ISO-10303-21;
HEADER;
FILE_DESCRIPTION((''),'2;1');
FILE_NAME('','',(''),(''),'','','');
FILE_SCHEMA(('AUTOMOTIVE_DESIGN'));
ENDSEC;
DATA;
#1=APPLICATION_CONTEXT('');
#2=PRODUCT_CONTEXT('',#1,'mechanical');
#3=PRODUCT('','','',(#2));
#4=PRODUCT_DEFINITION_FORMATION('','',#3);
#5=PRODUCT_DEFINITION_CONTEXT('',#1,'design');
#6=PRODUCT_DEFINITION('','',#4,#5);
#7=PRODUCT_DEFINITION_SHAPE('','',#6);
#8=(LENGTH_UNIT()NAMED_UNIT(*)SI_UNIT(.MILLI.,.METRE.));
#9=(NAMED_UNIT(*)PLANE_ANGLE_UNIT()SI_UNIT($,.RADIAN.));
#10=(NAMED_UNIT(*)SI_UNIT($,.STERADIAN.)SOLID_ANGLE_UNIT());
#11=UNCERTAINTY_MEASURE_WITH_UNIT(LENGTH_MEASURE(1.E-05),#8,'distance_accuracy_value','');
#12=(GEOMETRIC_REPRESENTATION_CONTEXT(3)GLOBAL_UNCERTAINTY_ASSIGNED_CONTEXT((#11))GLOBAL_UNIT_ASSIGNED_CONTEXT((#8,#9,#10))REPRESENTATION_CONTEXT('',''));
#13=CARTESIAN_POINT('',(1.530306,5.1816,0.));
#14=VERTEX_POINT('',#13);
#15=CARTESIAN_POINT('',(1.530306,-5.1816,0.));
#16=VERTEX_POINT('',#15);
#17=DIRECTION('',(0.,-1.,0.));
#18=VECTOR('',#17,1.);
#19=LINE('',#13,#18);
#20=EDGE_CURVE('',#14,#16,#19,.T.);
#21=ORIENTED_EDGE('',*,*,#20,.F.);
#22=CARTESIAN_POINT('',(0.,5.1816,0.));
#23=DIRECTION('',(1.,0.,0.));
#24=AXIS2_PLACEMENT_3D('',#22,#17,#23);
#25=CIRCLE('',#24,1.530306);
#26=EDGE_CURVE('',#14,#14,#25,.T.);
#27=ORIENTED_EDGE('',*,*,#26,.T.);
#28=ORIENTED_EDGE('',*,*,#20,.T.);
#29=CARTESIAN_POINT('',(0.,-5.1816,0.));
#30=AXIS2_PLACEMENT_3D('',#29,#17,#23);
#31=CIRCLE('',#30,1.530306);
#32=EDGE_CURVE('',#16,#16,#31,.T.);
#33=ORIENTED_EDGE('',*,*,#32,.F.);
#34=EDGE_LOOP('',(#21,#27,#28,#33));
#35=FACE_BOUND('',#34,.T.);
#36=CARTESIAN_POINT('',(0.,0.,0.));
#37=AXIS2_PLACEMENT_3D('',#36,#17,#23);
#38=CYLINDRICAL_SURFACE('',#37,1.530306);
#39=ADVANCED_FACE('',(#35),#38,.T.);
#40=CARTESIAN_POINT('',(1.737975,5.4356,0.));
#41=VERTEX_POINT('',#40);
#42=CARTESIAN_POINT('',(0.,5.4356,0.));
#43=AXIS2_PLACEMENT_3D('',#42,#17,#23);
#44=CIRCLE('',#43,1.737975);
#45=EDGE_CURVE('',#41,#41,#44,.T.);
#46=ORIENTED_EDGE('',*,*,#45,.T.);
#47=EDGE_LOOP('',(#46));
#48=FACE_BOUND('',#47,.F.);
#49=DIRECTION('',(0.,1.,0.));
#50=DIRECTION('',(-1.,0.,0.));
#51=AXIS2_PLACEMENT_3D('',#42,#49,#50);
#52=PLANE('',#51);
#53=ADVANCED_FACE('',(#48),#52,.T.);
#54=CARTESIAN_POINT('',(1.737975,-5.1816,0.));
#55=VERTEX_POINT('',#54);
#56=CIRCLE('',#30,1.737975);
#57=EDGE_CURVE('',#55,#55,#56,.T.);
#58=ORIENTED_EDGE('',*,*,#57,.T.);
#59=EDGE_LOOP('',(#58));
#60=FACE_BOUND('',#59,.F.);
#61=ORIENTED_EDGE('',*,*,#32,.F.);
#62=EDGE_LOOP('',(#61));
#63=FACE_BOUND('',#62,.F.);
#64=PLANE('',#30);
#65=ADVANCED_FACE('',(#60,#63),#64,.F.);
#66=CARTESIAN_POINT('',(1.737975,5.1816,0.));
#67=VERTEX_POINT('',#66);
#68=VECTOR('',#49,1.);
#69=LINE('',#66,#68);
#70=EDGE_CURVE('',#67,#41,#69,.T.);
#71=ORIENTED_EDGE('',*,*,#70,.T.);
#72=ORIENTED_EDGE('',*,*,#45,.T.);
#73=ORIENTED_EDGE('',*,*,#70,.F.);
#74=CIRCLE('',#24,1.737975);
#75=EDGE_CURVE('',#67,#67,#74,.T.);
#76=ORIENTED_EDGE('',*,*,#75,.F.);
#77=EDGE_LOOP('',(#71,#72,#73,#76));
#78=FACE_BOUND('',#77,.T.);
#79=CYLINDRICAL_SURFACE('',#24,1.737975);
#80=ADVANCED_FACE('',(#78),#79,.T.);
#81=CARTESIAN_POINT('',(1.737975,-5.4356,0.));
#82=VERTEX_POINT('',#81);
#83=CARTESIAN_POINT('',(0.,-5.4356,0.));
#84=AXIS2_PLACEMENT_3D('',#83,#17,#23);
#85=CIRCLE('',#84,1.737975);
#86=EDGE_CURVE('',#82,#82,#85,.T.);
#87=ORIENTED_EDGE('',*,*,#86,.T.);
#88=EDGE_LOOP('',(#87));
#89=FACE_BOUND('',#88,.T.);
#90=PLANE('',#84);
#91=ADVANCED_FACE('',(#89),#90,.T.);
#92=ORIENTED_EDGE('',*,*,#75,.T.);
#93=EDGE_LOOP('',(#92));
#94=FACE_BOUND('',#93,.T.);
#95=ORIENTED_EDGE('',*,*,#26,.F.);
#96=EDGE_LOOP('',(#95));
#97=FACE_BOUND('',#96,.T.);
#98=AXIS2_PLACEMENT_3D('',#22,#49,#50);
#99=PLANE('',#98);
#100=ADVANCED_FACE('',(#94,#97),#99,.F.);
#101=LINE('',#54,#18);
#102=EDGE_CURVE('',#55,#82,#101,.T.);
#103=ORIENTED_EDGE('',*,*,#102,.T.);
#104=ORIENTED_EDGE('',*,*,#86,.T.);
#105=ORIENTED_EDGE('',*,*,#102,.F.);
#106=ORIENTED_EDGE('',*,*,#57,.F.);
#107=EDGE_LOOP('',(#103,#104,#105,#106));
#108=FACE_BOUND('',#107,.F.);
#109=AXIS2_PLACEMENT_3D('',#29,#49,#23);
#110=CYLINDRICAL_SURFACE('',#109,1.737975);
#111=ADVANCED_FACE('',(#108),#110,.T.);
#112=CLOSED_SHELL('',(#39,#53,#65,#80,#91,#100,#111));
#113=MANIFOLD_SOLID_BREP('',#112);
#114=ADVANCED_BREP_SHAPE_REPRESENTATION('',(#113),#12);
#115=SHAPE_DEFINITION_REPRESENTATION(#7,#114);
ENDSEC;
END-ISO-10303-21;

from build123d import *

# Parameters (mm, degrees)
F0_R          = 1.5303057729
F1_DEPTH      = 5.1816
F1_DEPTH_BACK = 5.1816
F2_R          = 1.7379746904
F3_DEPTH      = 0.254


# Not quite as in the source:
# - a pattern or mirror of a feature is missing from the dataset's text; its kind, count and spacing are read off the source's solid


with BuildPart() as f1:
    # F0 (on Front) → F1 (new body, two sides)
    with BuildSketch(Plane.XZ) as f1_sk:
        Circle(F0_R)
    extrude(amount=F1_DEPTH)
    extrude(f1_sk.sketch, amount=-F1_DEPTH_BACK)

    # F2 (on face) → F3 (join)
    with BuildSketch(Plane.XZ.offset(5.1816)):
        Circle(F2_R)
    f3 = extrude(amount=F3_DEPTH)

    # F3_copies: F3 across plane
    add(f3.mirror(Plane.ZX))


solid = f1.part
